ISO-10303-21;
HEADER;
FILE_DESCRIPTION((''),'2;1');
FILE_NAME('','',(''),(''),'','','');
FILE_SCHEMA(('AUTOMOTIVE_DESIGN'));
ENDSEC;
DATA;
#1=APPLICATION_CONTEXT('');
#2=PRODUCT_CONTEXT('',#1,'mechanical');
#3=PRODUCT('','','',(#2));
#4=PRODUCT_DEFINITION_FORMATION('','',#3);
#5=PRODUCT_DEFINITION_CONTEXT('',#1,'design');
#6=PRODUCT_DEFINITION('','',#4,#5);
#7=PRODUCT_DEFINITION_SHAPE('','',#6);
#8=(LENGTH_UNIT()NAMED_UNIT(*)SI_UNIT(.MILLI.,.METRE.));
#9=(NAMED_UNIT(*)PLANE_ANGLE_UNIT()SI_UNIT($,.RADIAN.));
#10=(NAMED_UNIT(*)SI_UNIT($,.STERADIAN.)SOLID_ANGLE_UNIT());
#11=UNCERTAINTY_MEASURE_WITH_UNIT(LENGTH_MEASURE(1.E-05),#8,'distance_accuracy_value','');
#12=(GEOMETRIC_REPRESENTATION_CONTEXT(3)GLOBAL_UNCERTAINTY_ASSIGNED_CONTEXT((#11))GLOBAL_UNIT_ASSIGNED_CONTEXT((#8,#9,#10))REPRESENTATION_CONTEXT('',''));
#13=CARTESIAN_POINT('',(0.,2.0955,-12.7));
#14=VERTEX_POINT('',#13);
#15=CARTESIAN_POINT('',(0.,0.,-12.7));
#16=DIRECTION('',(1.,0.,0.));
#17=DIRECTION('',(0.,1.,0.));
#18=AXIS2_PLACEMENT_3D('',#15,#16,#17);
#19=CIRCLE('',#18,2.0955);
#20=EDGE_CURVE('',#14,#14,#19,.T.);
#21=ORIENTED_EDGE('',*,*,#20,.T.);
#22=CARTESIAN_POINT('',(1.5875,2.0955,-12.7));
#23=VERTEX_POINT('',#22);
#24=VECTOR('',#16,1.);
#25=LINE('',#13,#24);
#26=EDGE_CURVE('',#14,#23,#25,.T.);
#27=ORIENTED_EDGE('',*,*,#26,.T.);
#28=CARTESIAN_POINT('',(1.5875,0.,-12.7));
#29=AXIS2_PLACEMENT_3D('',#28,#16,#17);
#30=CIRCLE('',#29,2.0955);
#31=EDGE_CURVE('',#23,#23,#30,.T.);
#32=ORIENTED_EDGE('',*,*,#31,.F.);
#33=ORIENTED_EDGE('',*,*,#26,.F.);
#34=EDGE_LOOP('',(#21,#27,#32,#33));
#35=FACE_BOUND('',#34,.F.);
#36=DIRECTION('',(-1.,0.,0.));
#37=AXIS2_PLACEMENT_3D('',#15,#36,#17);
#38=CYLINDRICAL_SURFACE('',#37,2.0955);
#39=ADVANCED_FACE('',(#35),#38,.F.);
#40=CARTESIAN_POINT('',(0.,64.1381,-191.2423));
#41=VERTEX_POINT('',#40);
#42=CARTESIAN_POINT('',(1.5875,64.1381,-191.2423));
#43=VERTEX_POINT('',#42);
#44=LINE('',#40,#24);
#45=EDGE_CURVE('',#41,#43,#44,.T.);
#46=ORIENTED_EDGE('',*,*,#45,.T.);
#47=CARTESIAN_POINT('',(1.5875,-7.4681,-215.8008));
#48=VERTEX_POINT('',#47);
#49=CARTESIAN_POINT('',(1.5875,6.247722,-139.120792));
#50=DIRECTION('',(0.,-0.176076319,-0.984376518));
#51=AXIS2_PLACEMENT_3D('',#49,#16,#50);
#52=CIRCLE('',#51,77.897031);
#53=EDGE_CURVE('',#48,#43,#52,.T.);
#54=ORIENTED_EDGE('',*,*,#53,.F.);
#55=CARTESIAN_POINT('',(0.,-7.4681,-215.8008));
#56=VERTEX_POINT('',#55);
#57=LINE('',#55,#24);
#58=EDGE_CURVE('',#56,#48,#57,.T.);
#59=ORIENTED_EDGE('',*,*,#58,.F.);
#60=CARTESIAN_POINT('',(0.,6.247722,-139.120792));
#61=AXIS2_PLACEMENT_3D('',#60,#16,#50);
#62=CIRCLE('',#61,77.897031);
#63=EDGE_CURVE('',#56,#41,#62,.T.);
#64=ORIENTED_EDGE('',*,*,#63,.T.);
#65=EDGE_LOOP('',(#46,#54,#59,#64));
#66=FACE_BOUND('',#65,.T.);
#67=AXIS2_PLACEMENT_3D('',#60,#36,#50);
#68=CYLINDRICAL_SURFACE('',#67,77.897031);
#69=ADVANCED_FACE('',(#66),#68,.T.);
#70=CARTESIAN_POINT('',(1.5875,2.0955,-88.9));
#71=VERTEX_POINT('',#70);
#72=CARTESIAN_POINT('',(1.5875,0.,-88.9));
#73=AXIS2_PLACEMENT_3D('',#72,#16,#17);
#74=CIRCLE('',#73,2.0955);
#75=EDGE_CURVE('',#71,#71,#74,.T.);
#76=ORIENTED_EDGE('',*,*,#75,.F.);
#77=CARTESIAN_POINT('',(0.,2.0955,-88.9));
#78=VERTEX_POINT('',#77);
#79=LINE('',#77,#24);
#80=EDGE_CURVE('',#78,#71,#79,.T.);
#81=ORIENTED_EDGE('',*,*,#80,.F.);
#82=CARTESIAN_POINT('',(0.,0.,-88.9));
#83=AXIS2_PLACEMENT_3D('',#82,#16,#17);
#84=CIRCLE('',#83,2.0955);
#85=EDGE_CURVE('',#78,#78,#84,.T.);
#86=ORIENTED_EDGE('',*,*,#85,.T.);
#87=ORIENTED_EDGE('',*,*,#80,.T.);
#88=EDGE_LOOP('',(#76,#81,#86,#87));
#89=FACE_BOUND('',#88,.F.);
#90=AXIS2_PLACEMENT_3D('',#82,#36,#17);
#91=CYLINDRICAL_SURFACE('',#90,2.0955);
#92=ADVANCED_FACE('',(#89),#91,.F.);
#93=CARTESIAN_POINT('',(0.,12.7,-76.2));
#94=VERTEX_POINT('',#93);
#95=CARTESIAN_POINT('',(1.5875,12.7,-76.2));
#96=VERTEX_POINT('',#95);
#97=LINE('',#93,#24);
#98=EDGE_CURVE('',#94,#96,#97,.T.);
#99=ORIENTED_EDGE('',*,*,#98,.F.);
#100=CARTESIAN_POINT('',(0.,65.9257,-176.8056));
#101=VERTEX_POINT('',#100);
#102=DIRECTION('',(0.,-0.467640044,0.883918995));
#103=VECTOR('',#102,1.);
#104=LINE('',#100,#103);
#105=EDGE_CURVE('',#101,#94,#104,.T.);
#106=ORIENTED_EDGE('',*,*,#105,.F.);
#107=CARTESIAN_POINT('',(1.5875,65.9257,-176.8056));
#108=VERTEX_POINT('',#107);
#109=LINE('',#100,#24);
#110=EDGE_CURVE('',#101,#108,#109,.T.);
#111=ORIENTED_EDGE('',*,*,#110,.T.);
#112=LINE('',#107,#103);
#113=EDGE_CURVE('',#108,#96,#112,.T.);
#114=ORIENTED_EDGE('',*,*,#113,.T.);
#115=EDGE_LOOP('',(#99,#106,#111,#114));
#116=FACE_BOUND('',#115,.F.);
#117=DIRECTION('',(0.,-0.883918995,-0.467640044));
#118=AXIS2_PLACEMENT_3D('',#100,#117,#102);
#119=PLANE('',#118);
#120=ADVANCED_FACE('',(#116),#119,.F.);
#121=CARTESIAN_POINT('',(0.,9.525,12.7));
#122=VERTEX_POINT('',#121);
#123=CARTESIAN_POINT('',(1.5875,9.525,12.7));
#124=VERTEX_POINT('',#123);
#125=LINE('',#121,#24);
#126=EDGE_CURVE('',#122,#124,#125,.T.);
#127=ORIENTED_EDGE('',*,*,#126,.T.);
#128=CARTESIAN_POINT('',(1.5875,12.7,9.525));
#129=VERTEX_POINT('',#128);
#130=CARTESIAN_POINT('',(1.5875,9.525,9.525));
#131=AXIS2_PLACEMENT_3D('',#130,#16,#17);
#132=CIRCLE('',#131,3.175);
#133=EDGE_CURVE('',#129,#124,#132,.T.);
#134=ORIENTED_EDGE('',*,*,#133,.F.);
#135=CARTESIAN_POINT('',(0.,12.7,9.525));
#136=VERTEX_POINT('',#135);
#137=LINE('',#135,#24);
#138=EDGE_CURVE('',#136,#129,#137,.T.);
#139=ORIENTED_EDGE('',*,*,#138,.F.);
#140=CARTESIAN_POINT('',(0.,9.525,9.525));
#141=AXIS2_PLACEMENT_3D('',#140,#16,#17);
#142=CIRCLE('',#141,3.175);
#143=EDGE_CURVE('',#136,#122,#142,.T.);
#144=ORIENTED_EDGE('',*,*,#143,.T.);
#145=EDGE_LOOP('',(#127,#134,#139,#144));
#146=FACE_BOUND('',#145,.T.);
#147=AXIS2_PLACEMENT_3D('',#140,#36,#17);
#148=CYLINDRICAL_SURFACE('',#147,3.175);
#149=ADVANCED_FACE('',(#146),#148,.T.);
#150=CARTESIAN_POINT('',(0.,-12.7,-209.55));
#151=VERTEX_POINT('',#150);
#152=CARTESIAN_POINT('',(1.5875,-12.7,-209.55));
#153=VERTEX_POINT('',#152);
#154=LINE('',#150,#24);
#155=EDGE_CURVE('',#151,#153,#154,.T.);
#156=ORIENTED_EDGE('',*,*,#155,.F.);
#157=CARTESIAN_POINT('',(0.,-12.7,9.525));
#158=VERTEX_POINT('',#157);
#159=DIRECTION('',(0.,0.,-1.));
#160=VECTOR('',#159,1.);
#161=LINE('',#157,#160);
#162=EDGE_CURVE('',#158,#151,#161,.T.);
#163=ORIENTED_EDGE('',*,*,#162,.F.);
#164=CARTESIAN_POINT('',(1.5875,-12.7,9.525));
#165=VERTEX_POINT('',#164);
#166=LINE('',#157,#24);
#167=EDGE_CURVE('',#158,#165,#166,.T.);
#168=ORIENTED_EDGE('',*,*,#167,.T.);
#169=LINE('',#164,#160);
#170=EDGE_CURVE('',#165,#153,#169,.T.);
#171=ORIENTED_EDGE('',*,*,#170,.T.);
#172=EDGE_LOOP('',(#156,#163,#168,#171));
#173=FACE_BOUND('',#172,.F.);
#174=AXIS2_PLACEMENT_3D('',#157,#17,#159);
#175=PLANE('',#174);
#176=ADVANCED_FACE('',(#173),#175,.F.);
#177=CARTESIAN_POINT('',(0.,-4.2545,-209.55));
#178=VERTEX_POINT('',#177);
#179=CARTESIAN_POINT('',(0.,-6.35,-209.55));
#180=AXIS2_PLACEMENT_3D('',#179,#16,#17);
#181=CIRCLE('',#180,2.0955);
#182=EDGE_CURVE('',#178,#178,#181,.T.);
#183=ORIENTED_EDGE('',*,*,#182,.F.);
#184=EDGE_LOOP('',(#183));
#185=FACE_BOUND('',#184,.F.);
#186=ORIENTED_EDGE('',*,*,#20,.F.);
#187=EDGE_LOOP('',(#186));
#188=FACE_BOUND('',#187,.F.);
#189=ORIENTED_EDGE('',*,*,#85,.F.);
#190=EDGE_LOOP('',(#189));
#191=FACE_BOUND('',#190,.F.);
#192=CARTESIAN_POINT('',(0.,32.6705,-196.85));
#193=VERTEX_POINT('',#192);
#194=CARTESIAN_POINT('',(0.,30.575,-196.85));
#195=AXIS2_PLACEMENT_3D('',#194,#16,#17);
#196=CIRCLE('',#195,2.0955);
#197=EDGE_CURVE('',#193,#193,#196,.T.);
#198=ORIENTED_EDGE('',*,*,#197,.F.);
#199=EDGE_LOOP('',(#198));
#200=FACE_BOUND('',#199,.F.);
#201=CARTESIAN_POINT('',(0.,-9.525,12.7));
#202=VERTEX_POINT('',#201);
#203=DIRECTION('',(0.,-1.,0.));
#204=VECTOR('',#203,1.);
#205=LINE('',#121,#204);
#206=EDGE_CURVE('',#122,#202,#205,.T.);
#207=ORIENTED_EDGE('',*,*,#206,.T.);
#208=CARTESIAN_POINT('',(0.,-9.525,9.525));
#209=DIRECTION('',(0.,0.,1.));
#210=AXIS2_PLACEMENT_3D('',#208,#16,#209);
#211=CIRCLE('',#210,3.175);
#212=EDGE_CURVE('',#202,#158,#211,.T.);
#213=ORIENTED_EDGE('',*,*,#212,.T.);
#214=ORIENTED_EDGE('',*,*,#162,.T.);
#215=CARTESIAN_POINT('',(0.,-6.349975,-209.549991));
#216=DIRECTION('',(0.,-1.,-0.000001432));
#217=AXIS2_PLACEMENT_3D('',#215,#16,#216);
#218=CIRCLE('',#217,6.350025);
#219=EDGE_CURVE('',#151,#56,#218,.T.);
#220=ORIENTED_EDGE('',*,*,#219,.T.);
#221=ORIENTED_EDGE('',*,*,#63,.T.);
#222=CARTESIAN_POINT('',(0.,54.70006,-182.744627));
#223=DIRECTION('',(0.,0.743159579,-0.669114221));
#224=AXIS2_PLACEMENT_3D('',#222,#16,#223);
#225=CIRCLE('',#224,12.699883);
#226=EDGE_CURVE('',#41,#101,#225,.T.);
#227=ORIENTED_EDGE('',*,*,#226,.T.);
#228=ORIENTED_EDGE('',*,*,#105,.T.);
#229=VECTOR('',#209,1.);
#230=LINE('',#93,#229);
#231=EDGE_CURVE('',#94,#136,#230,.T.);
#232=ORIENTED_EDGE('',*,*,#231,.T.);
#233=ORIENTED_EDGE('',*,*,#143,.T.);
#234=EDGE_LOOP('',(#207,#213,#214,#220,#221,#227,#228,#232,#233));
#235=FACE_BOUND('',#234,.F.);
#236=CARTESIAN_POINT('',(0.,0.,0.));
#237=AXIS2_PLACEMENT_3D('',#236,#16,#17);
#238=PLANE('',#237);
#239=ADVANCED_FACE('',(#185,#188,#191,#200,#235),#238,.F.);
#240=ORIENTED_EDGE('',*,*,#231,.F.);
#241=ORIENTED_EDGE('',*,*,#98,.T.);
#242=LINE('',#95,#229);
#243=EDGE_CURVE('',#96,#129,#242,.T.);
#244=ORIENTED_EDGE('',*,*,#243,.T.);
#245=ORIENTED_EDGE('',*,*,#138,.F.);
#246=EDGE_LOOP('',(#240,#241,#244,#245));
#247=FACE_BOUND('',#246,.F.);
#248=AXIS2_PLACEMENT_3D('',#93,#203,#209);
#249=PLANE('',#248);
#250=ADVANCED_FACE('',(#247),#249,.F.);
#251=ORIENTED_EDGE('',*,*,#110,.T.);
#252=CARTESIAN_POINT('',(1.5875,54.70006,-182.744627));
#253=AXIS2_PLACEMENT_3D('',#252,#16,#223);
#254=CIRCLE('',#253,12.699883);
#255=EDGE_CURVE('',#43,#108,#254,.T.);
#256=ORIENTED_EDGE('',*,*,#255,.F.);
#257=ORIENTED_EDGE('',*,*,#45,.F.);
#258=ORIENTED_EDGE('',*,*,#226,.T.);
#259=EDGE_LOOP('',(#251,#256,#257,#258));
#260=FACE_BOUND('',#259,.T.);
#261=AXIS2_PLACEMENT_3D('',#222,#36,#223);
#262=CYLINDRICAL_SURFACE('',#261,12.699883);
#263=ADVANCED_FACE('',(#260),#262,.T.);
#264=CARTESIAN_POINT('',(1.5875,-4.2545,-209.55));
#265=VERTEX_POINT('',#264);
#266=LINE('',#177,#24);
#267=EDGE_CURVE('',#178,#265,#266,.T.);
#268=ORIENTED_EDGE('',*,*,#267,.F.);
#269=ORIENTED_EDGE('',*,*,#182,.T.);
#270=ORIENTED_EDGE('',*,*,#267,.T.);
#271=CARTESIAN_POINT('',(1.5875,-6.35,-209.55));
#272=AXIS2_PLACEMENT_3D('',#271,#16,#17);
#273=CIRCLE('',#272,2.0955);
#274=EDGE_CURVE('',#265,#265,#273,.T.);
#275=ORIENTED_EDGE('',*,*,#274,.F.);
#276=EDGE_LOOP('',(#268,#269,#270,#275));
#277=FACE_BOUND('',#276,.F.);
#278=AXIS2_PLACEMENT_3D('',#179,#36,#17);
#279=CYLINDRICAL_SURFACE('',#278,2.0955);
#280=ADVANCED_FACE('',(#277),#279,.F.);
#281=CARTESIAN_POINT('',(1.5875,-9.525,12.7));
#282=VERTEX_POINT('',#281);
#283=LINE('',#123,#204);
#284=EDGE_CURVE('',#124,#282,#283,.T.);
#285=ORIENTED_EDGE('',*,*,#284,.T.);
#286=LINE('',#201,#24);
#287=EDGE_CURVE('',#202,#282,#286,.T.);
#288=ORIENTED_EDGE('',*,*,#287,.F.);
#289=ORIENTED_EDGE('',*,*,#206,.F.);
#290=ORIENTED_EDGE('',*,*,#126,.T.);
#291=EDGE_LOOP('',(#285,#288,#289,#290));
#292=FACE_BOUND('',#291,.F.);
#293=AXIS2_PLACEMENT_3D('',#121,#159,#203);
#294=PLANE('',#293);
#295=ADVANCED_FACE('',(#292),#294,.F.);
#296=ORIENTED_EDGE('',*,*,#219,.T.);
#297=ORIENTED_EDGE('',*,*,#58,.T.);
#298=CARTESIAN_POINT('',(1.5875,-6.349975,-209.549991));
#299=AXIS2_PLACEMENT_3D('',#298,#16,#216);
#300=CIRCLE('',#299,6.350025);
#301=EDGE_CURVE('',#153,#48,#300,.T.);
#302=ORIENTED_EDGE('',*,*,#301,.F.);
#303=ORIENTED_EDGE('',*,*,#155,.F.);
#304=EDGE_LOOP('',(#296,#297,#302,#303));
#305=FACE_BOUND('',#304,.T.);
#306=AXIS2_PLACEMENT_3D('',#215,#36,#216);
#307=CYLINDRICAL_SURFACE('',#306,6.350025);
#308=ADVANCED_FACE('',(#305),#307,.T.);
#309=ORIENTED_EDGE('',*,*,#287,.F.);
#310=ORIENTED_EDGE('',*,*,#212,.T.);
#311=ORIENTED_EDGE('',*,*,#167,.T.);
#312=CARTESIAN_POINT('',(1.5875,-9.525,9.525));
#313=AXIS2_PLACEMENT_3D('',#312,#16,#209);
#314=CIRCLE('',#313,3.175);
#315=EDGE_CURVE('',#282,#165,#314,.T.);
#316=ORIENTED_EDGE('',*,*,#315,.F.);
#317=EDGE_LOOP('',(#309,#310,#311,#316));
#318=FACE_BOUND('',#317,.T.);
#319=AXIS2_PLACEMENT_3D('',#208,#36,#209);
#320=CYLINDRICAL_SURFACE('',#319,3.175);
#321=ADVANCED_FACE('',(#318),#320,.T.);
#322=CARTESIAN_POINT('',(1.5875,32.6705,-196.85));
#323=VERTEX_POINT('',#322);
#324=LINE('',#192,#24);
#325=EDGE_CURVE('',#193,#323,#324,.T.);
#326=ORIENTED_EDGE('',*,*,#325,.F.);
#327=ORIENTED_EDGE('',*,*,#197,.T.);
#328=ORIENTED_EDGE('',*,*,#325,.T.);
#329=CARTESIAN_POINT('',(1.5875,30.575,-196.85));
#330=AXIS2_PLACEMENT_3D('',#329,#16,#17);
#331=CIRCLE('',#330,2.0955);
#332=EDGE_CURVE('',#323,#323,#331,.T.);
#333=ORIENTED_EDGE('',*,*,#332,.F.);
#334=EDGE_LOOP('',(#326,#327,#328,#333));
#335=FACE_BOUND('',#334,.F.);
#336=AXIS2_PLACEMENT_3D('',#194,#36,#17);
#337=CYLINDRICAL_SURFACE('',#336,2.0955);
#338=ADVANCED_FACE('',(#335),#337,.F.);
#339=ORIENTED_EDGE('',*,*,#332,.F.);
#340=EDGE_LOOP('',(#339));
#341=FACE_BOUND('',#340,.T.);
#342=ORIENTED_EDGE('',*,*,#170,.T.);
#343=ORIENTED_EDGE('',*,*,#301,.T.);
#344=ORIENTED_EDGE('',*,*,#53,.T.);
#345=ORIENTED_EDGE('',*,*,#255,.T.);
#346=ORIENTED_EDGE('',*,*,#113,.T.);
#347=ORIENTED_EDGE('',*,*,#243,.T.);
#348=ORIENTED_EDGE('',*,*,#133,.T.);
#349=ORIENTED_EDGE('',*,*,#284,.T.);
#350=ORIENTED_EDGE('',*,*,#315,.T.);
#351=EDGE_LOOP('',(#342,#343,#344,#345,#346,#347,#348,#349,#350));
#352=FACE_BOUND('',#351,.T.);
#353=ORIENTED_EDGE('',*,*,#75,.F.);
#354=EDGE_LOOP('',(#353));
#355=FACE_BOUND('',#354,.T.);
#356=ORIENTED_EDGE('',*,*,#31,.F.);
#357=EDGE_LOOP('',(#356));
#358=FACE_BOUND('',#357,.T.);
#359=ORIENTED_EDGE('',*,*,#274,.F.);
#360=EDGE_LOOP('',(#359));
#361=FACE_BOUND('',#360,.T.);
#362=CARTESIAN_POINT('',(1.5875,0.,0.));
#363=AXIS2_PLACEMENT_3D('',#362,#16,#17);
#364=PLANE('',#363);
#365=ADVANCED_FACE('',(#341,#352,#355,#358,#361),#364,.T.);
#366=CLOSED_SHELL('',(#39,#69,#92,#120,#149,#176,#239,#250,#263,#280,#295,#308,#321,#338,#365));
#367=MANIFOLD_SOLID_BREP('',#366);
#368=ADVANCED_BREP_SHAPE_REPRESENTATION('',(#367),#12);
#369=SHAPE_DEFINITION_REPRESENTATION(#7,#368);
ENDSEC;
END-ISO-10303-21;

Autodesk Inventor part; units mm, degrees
ref_plane "YZ Plane" through (0, 0, 0) normal (1, 0, 0) x (0, 1, 0)
ref_plane "XZ Plane" through (0, 0, 0) normal (0, 1, 0) x (-1, 0, 0)
ref_plane "XY Plane" through (0, 0, 0) normal (0, 0, 1) x (1, 0, 0)
sketch "main" plane through (0, 0, 0) normal (0, 0, 1) x (1, 0, 0)
  circle A0 centre (-31.9195, -99.4713) radius 2.0955
  arc A1 (-38.2695, -99.4713) -> (-33.0376, -105.722) centre (-31.9195, -99.4713) ccw
  arc A2 (-33.0376, -105.722) -> (38.5686, -81.1636) centre (-19.3218, -29.0418) ccw
  line L0 (40.3562, -66.7269) -> (-12.8695, 33.8787)
  line L1 (-12.8695, 33.8787) -> (-12.8695, 119.6037)
  line L2 (-16.0445, 122.7787) -> (-35.0945, 122.7787)
  line L3 (-38.2695, 119.6037) -> (-38.2695, -99.4713)
  arc A3 (38.5686, -81.1636) -> (40.3562, -66.7269) centre (29.1304, -72.6659) ccw
  circle A4 centre (-25.5695, 21.1787) radius 2.0955
  arc A5 (-12.8695, 119.6037) -> (-16.0445, 122.7787) centre (-16.0445, 119.6037) ccw
  circle A6 centre (5.0055, -86.7713) radius 2.0955
  circle A7 centre (-25.5695, 97.3787) radius 2.0955
  arc A8 (-35.0945, 122.7787) -> (-38.2695, 119.6037) centre (-35.0945, 119.6037) ccw
  point P0 (-9.1863, -18.3686)
  point P1 (44.2418, -74.0713)
  dimension "d0" = 4.191
  dimension "d1" = 12.7
  dimension "d3" = 4.191
  dimension "d4" = 3.175
  dimension "d5" = 4.191
  dimension "d17" = 4.191
  dimension "d18" = 3.175
sketch "Sketch1" plane through (0, 0, 0) normal (1, 0, 0) x (0, 1, 0)
  circle A0 centre (-6.35, -209.55) radius 2.0955
  arc A1 (-12.7, -209.55) -> (-7.4681, -215.8008) centre (-6.35, -209.55) ccw
  arc A2 (-7.4681, -215.8008) -> (64.1381, -191.2423) centre (6.2477, -139.1205) ccw
  line L0 (65.9257, -176.8056) -> (12.7, -76.2)
  line L1 (12.7, -76.2) -> (12.7, 9.525)
  line L2 (9.525, 12.7) -> (-9.525, 12.7)
  line L3 (-12.7, 9.525) -> (-12.7, -209.55)
  arc A3 (64.1381, -191.2423) -> (65.9257, -176.8056) centre (54.7, -182.7446) ccw
  circle A4 centre (0, -88.9) radius 2.0955
  arc A5 (12.7, 9.525) -> (9.525, 12.7) centre (9.525, 9.525) ccw
  circle A6 centre (30.575, -196.85) radius 2.0955
  circle A7 centre (0, -12.7) radius 2.0955
  arc A8 (-9.525, 12.7) -> (-12.7, 9.525) centre (-9.525, 9.525) ccw
  point P0 (0, 0)
extrude "Extrusion1" add sketch "Sketch1" along normal blind 1.5875
equation "\"BendRadius\" = Thickness"
equation "\"BendReliefWidth\" = Thickness"
equation "\"BendReliefDepth\" = 0.5 * Thickness"
equation "\"CornerReliefSize\" = 4 * Thickness"
equation "\"MinimumRemnant\" = 2 * Thickness"
equation "\"TransitionRadius\" = BendRadius"
equation "\"JacobiRadiusSize\" = BendRadius"
equation "\"GapSize\" = Thickness"
equation "\"Thickness\" = 1.5875"
properties part number "gusset_no_motor" material "Acetal Resin, White"
